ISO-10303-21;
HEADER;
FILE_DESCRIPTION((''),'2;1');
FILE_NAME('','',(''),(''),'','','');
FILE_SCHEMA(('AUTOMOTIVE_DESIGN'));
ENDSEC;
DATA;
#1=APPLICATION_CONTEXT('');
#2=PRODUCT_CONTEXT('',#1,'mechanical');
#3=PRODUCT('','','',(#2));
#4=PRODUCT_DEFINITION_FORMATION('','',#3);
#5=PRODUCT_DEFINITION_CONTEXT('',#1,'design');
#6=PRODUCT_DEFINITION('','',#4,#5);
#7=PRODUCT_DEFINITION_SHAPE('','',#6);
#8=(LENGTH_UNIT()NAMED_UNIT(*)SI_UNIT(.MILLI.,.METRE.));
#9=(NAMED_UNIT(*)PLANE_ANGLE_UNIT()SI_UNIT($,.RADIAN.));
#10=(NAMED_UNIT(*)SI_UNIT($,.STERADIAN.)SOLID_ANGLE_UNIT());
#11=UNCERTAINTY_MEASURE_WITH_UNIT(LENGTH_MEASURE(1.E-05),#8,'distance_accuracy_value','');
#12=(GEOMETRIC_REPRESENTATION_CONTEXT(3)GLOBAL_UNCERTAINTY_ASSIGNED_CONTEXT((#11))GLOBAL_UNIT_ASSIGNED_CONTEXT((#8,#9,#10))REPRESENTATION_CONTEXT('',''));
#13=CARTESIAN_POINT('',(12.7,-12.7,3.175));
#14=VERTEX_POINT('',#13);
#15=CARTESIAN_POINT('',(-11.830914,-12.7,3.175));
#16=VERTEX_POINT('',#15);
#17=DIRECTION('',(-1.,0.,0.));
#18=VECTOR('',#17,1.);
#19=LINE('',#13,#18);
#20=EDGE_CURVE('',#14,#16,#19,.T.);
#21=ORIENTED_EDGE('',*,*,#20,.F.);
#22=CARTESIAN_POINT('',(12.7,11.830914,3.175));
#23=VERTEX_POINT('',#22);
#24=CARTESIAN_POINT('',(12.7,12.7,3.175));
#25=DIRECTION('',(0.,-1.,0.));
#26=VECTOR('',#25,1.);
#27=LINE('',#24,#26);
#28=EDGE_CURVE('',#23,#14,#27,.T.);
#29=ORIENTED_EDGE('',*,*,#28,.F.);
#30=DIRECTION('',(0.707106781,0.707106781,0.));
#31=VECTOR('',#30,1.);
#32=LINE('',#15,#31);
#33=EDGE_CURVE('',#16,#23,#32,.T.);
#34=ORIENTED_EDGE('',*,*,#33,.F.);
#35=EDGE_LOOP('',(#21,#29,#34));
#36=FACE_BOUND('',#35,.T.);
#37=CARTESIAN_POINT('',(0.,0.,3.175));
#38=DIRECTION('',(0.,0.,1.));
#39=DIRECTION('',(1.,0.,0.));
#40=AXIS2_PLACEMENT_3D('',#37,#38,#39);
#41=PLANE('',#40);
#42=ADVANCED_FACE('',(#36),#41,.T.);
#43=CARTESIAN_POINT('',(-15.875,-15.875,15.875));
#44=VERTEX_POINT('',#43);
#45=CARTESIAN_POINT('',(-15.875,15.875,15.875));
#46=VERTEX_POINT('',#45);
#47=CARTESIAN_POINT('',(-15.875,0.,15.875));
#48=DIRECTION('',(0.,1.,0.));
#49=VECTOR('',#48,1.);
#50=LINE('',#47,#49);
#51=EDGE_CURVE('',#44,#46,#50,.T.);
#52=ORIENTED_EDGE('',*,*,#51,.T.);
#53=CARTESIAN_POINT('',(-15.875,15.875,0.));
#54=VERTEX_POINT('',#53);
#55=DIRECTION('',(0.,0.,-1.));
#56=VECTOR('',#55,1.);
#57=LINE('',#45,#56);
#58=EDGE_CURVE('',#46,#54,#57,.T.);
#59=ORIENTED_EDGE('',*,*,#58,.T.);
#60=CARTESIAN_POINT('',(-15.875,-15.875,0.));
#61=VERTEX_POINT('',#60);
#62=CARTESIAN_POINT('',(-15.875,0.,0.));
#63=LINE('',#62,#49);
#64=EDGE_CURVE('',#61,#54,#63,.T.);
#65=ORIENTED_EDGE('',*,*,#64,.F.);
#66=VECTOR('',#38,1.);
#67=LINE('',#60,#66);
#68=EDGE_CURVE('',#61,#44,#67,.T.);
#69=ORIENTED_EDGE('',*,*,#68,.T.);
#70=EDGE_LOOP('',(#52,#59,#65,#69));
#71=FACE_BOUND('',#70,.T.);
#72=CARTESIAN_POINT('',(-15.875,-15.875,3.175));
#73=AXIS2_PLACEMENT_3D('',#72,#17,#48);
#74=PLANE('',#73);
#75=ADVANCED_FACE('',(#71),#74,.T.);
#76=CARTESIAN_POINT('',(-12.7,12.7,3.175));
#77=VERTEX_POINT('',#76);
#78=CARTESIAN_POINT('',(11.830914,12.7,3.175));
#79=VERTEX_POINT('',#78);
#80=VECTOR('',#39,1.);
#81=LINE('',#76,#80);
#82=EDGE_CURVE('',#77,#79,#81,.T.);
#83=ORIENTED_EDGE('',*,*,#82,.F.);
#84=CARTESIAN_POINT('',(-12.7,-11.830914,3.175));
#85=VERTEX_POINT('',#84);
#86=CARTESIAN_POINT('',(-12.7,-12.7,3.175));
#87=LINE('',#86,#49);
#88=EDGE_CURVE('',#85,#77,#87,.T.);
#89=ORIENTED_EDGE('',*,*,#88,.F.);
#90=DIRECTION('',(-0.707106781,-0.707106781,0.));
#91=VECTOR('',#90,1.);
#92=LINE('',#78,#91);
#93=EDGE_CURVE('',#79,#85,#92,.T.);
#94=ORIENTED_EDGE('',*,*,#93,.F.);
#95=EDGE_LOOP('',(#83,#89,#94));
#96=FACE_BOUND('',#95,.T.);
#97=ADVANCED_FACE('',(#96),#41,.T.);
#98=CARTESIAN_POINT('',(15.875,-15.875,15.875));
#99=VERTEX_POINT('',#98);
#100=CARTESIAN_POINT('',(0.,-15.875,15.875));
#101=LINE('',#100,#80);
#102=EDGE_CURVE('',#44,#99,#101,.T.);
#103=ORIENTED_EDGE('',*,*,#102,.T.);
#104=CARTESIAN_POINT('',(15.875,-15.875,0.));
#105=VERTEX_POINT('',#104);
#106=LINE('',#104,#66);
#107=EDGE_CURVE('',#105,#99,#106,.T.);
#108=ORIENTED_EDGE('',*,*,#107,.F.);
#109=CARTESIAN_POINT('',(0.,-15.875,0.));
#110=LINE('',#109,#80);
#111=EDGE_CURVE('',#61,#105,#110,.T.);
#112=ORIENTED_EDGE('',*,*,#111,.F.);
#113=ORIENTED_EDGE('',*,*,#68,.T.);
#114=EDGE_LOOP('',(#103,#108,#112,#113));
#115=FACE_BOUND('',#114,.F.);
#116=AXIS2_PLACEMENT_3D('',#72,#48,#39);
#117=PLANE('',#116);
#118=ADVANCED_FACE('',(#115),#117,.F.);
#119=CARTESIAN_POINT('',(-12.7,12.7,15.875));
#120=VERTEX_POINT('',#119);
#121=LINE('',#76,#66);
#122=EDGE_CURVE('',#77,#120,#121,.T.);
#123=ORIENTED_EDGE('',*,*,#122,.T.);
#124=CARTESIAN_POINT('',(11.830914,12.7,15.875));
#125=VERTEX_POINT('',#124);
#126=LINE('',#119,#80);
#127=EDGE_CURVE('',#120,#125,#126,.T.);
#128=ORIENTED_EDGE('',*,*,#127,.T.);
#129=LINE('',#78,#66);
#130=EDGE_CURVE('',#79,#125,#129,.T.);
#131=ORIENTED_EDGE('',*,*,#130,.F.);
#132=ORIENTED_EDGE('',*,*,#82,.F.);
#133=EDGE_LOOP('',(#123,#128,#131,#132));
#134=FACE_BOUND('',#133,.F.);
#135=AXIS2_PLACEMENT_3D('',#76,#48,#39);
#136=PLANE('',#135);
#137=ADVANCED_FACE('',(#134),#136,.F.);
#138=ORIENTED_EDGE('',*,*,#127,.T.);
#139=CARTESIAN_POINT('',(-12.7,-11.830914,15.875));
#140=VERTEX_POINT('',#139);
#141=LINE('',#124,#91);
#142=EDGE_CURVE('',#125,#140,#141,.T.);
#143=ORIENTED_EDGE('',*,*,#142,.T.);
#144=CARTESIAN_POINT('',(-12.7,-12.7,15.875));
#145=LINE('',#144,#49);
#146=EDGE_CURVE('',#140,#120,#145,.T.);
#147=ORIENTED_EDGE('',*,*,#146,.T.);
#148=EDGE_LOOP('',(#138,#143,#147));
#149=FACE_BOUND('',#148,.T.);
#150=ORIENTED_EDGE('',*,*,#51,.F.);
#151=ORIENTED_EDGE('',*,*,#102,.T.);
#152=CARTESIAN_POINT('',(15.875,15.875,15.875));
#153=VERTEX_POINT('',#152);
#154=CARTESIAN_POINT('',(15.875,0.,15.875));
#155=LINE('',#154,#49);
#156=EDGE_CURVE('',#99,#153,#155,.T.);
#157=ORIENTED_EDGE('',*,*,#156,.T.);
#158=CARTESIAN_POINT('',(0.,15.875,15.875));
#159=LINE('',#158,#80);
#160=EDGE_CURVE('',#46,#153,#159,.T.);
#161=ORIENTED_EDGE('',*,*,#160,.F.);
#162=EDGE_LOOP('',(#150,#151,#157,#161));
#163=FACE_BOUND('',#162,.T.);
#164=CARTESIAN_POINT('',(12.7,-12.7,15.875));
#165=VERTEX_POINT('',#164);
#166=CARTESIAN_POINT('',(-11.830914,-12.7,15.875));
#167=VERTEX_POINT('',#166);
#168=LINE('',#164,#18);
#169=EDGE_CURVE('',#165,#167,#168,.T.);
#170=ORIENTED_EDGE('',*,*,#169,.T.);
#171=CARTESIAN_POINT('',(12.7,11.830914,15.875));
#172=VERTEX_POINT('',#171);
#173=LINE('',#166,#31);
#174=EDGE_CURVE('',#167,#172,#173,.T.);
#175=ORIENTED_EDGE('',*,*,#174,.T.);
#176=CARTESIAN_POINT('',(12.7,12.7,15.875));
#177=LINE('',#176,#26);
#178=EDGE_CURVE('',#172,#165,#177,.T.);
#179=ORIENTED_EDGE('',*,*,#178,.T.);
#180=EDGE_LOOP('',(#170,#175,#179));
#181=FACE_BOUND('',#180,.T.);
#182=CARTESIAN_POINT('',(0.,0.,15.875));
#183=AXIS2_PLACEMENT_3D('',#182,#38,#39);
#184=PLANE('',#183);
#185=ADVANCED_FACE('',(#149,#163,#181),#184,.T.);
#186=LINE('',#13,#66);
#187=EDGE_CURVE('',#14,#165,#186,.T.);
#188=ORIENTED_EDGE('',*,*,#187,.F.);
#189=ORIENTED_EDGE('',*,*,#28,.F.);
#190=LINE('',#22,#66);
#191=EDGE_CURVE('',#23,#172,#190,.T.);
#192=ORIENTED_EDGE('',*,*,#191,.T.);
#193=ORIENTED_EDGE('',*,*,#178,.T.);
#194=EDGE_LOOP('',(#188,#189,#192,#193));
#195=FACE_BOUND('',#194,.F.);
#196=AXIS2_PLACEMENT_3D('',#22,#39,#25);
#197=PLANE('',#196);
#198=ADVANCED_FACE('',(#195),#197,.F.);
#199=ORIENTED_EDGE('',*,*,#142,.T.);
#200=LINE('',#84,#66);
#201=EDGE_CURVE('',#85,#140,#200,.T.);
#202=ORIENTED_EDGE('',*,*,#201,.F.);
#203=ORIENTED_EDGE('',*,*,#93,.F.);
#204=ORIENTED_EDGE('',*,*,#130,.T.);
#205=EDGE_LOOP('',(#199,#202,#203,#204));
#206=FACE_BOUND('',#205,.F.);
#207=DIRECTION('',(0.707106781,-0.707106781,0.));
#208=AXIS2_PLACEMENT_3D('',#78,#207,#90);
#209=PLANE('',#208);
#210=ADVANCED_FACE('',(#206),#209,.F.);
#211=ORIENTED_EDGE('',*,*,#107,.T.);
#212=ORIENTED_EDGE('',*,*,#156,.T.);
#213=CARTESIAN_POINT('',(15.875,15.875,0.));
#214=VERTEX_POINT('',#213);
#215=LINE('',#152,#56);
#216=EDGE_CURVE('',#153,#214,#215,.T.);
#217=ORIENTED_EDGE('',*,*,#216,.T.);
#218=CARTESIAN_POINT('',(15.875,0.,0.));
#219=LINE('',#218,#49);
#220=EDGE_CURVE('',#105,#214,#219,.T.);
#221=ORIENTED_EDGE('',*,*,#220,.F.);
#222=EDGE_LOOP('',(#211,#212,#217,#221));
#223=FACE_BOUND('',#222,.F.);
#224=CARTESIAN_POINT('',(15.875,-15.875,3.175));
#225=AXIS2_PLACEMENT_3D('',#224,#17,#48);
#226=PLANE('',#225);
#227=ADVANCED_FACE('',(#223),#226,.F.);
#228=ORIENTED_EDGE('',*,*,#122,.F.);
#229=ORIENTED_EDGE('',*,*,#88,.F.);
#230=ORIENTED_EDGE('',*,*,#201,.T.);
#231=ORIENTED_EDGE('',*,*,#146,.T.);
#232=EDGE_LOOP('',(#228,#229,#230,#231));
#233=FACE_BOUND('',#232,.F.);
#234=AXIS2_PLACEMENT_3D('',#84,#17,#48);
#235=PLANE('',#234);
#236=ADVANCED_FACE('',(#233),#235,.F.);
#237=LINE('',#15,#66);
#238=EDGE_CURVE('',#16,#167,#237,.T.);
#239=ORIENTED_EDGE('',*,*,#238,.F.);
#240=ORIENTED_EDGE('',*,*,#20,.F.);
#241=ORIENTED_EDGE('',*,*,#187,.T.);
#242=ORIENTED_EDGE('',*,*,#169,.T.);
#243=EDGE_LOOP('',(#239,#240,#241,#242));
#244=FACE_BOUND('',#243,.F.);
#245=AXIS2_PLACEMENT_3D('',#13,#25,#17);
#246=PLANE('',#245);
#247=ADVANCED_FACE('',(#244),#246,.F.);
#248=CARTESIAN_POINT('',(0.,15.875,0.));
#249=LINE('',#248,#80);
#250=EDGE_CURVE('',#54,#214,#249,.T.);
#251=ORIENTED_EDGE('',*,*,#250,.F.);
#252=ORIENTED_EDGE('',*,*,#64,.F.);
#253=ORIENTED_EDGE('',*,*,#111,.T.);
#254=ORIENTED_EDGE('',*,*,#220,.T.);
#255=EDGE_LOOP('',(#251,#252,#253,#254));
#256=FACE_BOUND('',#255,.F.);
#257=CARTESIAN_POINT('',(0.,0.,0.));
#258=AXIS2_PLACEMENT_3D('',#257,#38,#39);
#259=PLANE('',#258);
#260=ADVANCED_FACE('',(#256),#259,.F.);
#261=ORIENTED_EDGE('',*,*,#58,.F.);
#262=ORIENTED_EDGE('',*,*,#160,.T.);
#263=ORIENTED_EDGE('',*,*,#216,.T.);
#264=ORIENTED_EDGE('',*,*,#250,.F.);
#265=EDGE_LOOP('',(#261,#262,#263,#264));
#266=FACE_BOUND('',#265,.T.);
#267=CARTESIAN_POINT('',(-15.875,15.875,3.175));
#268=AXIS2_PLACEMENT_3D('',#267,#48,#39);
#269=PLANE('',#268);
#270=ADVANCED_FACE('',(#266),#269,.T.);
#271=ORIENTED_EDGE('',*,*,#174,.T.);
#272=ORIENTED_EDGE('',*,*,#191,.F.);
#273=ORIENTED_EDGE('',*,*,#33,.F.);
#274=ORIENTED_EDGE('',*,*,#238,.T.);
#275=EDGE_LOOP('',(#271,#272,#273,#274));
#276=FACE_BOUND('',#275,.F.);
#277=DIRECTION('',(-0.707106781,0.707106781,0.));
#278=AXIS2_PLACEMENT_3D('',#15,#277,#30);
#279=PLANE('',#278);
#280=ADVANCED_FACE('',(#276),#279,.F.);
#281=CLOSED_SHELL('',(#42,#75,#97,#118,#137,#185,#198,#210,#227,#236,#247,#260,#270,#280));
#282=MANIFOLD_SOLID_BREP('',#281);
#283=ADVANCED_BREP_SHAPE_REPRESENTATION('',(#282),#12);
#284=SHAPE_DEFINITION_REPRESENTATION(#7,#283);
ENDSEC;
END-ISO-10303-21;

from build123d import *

# Parameters (mm, degrees)
F0_W     = 31.75
F0_H     = 31.75
F1_DEPTH = 3.175
F2_W     = 31.75
F2_H     = 31.75
F3_DEPTH = 12.7


# Not quite as in the source:
# - a length typed as a fraction of an inch, garbled in the dataset ("3 / 203.2 mm" for 3/8 in), is restored


with BuildPart() as f1:
    # F0 (on Top) → F1 (new body)
    with BuildSketch(Plane.XY):
        Rectangle(F0_W, F0_H)
    extrude(amount=F1_DEPTH)

    # F2 (on face) → F3 (join)
    with BuildSketch(Plane.XY.offset(3.175)):
        Rectangle(F2_W, F2_H)
        Polygon((12.7, 11.8309138343), (12.7, -12.7), (-11.8309138343, -12.7), (-12.7, -12.7), (-12.7, -11.8309138343), (-12.7, 12.7), (11.8309138343, 12.7), (12.7, 12.7), align=None, mode=Mode.SUBTRACT)
        Polygon((-12.7, -11.8309138343), (-12.7, -12.7), (12.7, 12.7), (11.8309138343, 12.7), align=None)
        Polygon((-12.7, -12.7), (-11.8309138343, -12.7), (12.7, 11.8309138343), (12.7, 12.7), align=None)
    extrude(amount=F3_DEPTH)


solid = f1.part
